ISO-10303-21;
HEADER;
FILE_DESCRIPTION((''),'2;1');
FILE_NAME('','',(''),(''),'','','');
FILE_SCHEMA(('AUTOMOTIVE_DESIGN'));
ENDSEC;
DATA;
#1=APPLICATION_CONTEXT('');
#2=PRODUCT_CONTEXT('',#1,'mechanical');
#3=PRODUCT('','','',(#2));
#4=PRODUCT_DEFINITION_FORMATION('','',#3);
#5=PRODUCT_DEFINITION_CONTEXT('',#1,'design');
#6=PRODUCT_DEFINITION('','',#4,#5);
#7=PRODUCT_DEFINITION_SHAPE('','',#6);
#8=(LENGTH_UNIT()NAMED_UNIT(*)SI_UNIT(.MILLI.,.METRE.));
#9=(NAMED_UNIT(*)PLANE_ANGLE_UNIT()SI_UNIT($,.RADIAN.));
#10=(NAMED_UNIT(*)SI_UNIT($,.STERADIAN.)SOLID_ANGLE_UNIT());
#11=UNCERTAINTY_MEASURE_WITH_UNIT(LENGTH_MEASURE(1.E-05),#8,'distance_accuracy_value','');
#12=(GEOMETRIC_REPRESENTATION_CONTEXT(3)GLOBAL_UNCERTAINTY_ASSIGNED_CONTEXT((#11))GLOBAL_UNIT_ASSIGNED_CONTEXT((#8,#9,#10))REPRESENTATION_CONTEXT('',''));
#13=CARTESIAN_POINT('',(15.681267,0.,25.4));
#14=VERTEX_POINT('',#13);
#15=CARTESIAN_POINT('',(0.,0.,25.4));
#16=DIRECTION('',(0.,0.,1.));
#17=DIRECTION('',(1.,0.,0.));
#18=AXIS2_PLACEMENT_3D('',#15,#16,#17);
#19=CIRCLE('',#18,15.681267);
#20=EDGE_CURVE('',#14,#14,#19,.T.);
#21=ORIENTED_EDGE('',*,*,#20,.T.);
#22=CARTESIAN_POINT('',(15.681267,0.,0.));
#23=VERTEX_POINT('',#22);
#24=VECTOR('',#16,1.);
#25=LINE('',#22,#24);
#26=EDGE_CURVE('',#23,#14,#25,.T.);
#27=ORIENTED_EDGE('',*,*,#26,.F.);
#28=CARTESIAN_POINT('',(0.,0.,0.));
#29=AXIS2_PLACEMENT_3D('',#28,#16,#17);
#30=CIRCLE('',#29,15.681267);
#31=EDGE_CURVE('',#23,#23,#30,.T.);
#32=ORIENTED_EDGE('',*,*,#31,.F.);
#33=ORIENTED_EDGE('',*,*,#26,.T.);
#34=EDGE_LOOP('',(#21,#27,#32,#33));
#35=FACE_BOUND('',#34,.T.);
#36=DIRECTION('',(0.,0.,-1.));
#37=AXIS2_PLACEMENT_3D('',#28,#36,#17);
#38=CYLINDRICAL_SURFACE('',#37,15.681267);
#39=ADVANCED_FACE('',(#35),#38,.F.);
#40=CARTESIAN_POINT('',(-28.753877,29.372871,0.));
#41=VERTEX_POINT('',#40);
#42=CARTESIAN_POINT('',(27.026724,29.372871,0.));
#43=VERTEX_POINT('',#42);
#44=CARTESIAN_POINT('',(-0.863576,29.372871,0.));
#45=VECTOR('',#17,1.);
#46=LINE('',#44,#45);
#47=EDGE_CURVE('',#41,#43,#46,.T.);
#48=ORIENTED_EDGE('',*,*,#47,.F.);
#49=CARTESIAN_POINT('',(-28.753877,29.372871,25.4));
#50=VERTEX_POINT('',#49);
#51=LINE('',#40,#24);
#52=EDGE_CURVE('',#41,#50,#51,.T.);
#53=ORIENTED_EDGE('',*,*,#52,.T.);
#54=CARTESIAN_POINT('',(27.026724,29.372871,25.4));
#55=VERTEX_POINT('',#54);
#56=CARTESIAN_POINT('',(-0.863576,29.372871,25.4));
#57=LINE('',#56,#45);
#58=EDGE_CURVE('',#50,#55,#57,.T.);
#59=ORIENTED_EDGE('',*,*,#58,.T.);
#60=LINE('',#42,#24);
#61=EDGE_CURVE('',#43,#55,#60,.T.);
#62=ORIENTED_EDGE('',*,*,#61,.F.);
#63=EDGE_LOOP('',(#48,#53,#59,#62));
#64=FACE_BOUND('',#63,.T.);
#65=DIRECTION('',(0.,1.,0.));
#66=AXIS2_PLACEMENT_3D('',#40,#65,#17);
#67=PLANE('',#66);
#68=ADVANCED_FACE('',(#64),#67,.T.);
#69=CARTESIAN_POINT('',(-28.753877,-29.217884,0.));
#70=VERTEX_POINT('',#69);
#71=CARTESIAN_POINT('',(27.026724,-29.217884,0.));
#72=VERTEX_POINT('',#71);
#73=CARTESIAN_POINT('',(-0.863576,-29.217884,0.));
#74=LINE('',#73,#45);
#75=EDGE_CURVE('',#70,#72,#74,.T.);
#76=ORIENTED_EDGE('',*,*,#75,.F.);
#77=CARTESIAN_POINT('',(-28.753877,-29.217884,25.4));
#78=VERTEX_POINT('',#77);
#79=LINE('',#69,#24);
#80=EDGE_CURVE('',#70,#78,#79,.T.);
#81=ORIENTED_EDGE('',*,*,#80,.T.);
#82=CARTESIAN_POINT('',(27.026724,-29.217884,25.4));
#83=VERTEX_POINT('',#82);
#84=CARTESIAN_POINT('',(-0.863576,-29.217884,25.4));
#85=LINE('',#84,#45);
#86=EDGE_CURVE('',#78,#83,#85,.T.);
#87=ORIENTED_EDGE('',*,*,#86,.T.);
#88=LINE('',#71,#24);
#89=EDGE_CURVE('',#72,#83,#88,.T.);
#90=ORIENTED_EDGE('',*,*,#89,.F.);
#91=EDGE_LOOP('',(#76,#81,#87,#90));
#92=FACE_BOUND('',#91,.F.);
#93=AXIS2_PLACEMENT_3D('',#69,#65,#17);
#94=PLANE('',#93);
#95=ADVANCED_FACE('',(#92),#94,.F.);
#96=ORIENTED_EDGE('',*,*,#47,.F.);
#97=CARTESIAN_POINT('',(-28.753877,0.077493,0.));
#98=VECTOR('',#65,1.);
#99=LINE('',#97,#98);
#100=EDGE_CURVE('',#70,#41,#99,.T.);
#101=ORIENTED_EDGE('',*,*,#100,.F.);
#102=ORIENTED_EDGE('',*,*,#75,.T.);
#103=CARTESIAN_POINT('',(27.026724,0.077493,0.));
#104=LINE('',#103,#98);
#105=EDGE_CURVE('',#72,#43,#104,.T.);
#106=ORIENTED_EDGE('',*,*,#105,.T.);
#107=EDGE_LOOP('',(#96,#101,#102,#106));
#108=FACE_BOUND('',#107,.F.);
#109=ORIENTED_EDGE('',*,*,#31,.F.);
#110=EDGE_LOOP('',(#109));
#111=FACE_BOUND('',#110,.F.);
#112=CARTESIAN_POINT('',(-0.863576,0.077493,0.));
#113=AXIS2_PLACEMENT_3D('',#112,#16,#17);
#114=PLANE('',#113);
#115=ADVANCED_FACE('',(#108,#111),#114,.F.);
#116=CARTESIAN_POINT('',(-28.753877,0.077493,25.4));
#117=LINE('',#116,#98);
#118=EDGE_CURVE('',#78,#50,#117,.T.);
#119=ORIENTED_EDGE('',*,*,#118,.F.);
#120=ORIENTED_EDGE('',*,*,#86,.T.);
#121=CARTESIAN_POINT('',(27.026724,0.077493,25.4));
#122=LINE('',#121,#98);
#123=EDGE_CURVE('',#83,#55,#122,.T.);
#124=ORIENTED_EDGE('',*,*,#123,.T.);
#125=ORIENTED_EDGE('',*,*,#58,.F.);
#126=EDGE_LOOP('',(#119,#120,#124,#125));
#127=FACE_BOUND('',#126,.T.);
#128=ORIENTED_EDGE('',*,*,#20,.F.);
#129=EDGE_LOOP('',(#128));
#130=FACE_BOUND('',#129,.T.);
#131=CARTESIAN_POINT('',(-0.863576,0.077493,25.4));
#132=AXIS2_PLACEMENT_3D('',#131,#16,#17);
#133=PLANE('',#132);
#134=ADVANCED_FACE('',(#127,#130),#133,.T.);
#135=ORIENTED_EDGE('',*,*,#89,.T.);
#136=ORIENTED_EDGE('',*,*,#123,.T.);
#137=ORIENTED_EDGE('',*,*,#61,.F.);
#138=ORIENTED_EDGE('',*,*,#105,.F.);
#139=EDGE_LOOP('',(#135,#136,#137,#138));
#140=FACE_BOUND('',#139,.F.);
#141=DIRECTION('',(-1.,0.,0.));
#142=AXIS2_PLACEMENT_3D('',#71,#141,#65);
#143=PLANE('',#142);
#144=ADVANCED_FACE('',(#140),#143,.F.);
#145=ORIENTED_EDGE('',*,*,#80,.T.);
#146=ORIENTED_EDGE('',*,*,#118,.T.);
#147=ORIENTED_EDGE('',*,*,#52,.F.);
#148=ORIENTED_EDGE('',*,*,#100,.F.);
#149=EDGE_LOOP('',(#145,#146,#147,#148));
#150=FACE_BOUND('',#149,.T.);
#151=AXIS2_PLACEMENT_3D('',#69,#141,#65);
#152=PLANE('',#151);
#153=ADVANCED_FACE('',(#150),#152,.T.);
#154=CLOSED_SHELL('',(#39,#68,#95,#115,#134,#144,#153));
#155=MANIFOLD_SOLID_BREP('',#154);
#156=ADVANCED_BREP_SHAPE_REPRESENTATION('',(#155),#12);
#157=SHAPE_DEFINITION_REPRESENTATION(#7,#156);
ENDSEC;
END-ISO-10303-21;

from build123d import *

# Parameters (mm, degrees)
F0_W     = 55.7806007564
F0_H     = 58.5907548666
F0_R     = 15.6812666629
F1_DEPTH = 25.4


# Not quite as in the source:
# - a feature names something its author has since deleted; it is built from what else it names


with BuildPart() as f1:
    # F0 (on Top) → F1 (new body)
    with BuildSketch(Plane.XY):
        with Locations((-0.8635763079, 0.0774934888)):
            Rectangle(F0_W, F0_H)
        Circle(F0_R, mode=Mode.SUBTRACT)
    extrude(amount=F1_DEPTH)


solid = f1.part
